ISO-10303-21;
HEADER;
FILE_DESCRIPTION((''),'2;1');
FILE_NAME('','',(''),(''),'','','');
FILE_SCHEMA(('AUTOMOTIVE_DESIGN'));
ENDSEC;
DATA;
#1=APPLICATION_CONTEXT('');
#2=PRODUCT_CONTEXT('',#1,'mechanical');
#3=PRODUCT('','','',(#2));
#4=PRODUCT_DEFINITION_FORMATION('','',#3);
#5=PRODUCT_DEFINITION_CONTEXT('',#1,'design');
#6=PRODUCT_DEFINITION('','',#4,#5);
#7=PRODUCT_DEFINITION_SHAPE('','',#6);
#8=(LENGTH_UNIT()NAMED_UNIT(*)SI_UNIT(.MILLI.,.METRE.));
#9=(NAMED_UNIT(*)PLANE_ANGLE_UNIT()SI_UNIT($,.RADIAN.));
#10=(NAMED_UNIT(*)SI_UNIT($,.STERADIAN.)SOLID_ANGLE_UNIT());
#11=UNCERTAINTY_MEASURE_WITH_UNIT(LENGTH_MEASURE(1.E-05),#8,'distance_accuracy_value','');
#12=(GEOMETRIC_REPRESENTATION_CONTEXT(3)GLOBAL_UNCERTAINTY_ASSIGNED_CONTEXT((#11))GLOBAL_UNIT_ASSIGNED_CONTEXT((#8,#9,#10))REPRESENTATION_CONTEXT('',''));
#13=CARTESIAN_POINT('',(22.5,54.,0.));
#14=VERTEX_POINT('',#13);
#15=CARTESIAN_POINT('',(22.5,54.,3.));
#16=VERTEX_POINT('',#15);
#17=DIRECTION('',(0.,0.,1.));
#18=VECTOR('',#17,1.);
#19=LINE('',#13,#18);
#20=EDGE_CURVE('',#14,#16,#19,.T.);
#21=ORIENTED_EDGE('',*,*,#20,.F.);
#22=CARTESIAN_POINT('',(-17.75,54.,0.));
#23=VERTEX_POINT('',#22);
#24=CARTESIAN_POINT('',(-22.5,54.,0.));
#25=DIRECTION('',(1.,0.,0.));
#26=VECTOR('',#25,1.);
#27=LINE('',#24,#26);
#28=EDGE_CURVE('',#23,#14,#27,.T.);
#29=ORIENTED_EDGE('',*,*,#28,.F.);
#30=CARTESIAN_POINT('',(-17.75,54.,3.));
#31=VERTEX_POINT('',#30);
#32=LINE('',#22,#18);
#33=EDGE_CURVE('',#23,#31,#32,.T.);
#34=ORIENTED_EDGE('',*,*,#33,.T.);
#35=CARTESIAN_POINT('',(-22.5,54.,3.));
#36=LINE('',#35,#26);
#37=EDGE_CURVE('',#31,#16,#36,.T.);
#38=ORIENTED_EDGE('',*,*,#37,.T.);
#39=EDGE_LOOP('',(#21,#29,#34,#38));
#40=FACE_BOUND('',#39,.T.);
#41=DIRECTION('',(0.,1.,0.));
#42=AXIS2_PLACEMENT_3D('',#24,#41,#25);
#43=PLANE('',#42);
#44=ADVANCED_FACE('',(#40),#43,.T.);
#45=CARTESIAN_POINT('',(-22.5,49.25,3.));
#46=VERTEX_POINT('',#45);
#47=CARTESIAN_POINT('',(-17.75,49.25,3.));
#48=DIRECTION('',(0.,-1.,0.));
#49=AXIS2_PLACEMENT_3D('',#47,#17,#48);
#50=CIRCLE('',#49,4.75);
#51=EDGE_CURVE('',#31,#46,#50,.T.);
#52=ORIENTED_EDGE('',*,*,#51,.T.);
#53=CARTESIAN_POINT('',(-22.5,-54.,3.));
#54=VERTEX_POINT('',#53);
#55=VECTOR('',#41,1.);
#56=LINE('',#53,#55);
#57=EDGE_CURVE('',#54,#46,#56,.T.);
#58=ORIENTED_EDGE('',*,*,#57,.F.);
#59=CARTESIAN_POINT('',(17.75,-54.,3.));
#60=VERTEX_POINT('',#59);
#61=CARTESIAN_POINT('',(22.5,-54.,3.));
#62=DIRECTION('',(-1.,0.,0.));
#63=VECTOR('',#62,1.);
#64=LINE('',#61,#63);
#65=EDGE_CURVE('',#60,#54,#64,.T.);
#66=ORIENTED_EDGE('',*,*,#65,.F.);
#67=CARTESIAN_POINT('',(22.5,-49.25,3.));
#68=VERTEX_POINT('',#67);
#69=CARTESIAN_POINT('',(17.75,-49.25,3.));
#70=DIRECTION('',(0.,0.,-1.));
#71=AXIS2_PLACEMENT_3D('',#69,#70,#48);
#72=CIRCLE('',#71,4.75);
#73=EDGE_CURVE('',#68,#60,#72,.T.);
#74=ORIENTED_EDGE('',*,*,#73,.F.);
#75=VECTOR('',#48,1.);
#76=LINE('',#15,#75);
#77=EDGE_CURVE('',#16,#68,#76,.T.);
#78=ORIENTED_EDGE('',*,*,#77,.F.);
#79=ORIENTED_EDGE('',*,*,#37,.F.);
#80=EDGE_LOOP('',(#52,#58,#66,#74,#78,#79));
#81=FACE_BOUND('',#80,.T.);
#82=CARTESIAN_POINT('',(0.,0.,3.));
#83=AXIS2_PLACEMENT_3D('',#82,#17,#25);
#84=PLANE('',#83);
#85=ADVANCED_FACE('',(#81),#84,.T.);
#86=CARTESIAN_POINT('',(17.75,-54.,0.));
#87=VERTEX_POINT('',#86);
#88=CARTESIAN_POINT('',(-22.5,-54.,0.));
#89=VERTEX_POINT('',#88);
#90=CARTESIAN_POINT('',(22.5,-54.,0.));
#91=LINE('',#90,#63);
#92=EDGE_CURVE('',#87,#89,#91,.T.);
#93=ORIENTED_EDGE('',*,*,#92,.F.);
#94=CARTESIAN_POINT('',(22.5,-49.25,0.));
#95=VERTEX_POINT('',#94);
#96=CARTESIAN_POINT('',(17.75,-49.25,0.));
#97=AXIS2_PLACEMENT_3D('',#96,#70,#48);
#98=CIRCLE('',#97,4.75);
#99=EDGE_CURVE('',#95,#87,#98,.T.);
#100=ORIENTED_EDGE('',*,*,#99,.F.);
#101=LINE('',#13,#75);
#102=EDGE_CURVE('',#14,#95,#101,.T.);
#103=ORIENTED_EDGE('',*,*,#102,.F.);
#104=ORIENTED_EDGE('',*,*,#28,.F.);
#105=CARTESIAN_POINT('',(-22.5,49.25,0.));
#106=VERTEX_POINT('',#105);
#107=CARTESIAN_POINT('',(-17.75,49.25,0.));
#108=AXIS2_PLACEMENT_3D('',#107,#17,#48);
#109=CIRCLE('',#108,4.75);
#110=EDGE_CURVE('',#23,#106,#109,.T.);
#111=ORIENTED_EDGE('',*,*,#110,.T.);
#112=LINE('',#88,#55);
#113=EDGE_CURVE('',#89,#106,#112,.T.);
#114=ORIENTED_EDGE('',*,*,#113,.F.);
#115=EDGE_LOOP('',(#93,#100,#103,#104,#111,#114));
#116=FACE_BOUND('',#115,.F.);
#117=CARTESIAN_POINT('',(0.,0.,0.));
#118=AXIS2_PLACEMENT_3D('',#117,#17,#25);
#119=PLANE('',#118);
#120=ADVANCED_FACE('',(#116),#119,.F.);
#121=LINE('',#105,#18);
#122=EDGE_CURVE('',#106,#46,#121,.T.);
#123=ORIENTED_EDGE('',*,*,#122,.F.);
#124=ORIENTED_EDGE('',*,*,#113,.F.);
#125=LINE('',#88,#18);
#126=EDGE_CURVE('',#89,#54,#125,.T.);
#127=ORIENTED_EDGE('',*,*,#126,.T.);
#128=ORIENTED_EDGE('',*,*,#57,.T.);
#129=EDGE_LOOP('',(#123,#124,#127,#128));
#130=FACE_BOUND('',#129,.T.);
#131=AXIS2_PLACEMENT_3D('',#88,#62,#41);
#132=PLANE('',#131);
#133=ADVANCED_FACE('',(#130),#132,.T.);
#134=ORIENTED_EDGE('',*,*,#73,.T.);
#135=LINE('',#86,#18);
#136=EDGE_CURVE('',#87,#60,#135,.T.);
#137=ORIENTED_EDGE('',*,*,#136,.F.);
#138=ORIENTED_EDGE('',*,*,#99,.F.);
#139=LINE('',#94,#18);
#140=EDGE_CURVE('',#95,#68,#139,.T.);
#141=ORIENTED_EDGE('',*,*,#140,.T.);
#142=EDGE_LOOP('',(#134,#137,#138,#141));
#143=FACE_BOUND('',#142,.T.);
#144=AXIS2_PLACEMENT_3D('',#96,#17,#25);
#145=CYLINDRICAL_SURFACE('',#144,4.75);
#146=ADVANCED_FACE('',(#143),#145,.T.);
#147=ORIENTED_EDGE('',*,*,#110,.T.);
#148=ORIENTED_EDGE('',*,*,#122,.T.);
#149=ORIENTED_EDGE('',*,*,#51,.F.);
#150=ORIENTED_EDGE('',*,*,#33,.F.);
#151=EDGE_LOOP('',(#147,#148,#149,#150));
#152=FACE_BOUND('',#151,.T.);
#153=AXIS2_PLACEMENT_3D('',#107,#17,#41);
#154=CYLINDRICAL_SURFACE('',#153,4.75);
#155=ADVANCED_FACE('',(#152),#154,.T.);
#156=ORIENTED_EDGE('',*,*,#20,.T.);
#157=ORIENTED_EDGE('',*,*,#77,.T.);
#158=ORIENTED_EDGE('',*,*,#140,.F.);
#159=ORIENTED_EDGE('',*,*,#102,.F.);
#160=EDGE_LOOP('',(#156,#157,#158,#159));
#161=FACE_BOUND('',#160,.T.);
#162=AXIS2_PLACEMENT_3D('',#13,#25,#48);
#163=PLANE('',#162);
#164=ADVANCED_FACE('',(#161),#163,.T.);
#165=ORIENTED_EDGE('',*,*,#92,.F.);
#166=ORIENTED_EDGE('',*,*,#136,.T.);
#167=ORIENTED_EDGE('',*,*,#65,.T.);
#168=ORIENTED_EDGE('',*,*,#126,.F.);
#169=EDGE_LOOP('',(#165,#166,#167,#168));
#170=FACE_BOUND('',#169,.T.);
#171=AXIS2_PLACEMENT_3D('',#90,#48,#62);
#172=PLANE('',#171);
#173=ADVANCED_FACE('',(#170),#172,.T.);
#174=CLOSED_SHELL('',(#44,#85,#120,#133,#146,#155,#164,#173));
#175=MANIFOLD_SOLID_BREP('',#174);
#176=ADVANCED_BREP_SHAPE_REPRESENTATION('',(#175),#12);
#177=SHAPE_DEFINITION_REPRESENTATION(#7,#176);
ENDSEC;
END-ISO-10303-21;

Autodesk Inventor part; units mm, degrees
ref_plane "YZ Plane" through (0, 0, 0) normal (1, 0, 0) x (0, 1, 0)
ref_plane "XZ Plane" through (0, 0, 0) normal (0, 1, 0) x (-1, 0, 0)
ref_plane "XY Plane" through (0, 0, 0) normal (0, 0, 1) x (1, 0, 0)
sketch "Sketch1" plane through (0, 0, 0) normal (0, 0, 1) x (1, 0, 0)
  line L0 (-22.5, 54) -> (22.5, 54)
  line L1 (22.5, 54) -> (22.5, -54)
  line L2 (22.5, -54) -> (-22.5, -54)
  line L3 (-22.5, -54) -> (-22.5, 54)
  line L4 (-22.5, 54) -> (22.5, -54) construction
  point P0 (0, 0)
  point P1 (0, 0)
  dimension "d0" = 45
  dimension "d1" = 108
extrude "Plate1" add sketch "Sketch1" along normal blind 3
fillet "Corner Round2" radius 4.75 2 edges at (22.5, -54, 1.5) (-22.5, 54, 1.5)
equation "\"d0\" = RIDGE_1_width"
equation "\"d2\" = Thickness"
equation "\"BendReliefWidth\" = Thickness"
equation "\"BendReliefDepth\" = 0.5 * Thickness"
equation "\"CornerReliefSize\" = 4 * Thickness"
equation "\"MinimumRemnant\" = 2 * Thickness"
equation "\"TransitionRadius\" = BendRadius"
equation "\"JacobiRadiusSize\" = BendRadius"
equation "\"GapSize\" = Thickness"
equation "\"RIDGE_1_width\" = 45"
equation "\"Thickness\" = 3"
equation "\"BendRadius\" = 5"
properties part number "DSB-104 ridge end cap" material "Stainless Steel"
